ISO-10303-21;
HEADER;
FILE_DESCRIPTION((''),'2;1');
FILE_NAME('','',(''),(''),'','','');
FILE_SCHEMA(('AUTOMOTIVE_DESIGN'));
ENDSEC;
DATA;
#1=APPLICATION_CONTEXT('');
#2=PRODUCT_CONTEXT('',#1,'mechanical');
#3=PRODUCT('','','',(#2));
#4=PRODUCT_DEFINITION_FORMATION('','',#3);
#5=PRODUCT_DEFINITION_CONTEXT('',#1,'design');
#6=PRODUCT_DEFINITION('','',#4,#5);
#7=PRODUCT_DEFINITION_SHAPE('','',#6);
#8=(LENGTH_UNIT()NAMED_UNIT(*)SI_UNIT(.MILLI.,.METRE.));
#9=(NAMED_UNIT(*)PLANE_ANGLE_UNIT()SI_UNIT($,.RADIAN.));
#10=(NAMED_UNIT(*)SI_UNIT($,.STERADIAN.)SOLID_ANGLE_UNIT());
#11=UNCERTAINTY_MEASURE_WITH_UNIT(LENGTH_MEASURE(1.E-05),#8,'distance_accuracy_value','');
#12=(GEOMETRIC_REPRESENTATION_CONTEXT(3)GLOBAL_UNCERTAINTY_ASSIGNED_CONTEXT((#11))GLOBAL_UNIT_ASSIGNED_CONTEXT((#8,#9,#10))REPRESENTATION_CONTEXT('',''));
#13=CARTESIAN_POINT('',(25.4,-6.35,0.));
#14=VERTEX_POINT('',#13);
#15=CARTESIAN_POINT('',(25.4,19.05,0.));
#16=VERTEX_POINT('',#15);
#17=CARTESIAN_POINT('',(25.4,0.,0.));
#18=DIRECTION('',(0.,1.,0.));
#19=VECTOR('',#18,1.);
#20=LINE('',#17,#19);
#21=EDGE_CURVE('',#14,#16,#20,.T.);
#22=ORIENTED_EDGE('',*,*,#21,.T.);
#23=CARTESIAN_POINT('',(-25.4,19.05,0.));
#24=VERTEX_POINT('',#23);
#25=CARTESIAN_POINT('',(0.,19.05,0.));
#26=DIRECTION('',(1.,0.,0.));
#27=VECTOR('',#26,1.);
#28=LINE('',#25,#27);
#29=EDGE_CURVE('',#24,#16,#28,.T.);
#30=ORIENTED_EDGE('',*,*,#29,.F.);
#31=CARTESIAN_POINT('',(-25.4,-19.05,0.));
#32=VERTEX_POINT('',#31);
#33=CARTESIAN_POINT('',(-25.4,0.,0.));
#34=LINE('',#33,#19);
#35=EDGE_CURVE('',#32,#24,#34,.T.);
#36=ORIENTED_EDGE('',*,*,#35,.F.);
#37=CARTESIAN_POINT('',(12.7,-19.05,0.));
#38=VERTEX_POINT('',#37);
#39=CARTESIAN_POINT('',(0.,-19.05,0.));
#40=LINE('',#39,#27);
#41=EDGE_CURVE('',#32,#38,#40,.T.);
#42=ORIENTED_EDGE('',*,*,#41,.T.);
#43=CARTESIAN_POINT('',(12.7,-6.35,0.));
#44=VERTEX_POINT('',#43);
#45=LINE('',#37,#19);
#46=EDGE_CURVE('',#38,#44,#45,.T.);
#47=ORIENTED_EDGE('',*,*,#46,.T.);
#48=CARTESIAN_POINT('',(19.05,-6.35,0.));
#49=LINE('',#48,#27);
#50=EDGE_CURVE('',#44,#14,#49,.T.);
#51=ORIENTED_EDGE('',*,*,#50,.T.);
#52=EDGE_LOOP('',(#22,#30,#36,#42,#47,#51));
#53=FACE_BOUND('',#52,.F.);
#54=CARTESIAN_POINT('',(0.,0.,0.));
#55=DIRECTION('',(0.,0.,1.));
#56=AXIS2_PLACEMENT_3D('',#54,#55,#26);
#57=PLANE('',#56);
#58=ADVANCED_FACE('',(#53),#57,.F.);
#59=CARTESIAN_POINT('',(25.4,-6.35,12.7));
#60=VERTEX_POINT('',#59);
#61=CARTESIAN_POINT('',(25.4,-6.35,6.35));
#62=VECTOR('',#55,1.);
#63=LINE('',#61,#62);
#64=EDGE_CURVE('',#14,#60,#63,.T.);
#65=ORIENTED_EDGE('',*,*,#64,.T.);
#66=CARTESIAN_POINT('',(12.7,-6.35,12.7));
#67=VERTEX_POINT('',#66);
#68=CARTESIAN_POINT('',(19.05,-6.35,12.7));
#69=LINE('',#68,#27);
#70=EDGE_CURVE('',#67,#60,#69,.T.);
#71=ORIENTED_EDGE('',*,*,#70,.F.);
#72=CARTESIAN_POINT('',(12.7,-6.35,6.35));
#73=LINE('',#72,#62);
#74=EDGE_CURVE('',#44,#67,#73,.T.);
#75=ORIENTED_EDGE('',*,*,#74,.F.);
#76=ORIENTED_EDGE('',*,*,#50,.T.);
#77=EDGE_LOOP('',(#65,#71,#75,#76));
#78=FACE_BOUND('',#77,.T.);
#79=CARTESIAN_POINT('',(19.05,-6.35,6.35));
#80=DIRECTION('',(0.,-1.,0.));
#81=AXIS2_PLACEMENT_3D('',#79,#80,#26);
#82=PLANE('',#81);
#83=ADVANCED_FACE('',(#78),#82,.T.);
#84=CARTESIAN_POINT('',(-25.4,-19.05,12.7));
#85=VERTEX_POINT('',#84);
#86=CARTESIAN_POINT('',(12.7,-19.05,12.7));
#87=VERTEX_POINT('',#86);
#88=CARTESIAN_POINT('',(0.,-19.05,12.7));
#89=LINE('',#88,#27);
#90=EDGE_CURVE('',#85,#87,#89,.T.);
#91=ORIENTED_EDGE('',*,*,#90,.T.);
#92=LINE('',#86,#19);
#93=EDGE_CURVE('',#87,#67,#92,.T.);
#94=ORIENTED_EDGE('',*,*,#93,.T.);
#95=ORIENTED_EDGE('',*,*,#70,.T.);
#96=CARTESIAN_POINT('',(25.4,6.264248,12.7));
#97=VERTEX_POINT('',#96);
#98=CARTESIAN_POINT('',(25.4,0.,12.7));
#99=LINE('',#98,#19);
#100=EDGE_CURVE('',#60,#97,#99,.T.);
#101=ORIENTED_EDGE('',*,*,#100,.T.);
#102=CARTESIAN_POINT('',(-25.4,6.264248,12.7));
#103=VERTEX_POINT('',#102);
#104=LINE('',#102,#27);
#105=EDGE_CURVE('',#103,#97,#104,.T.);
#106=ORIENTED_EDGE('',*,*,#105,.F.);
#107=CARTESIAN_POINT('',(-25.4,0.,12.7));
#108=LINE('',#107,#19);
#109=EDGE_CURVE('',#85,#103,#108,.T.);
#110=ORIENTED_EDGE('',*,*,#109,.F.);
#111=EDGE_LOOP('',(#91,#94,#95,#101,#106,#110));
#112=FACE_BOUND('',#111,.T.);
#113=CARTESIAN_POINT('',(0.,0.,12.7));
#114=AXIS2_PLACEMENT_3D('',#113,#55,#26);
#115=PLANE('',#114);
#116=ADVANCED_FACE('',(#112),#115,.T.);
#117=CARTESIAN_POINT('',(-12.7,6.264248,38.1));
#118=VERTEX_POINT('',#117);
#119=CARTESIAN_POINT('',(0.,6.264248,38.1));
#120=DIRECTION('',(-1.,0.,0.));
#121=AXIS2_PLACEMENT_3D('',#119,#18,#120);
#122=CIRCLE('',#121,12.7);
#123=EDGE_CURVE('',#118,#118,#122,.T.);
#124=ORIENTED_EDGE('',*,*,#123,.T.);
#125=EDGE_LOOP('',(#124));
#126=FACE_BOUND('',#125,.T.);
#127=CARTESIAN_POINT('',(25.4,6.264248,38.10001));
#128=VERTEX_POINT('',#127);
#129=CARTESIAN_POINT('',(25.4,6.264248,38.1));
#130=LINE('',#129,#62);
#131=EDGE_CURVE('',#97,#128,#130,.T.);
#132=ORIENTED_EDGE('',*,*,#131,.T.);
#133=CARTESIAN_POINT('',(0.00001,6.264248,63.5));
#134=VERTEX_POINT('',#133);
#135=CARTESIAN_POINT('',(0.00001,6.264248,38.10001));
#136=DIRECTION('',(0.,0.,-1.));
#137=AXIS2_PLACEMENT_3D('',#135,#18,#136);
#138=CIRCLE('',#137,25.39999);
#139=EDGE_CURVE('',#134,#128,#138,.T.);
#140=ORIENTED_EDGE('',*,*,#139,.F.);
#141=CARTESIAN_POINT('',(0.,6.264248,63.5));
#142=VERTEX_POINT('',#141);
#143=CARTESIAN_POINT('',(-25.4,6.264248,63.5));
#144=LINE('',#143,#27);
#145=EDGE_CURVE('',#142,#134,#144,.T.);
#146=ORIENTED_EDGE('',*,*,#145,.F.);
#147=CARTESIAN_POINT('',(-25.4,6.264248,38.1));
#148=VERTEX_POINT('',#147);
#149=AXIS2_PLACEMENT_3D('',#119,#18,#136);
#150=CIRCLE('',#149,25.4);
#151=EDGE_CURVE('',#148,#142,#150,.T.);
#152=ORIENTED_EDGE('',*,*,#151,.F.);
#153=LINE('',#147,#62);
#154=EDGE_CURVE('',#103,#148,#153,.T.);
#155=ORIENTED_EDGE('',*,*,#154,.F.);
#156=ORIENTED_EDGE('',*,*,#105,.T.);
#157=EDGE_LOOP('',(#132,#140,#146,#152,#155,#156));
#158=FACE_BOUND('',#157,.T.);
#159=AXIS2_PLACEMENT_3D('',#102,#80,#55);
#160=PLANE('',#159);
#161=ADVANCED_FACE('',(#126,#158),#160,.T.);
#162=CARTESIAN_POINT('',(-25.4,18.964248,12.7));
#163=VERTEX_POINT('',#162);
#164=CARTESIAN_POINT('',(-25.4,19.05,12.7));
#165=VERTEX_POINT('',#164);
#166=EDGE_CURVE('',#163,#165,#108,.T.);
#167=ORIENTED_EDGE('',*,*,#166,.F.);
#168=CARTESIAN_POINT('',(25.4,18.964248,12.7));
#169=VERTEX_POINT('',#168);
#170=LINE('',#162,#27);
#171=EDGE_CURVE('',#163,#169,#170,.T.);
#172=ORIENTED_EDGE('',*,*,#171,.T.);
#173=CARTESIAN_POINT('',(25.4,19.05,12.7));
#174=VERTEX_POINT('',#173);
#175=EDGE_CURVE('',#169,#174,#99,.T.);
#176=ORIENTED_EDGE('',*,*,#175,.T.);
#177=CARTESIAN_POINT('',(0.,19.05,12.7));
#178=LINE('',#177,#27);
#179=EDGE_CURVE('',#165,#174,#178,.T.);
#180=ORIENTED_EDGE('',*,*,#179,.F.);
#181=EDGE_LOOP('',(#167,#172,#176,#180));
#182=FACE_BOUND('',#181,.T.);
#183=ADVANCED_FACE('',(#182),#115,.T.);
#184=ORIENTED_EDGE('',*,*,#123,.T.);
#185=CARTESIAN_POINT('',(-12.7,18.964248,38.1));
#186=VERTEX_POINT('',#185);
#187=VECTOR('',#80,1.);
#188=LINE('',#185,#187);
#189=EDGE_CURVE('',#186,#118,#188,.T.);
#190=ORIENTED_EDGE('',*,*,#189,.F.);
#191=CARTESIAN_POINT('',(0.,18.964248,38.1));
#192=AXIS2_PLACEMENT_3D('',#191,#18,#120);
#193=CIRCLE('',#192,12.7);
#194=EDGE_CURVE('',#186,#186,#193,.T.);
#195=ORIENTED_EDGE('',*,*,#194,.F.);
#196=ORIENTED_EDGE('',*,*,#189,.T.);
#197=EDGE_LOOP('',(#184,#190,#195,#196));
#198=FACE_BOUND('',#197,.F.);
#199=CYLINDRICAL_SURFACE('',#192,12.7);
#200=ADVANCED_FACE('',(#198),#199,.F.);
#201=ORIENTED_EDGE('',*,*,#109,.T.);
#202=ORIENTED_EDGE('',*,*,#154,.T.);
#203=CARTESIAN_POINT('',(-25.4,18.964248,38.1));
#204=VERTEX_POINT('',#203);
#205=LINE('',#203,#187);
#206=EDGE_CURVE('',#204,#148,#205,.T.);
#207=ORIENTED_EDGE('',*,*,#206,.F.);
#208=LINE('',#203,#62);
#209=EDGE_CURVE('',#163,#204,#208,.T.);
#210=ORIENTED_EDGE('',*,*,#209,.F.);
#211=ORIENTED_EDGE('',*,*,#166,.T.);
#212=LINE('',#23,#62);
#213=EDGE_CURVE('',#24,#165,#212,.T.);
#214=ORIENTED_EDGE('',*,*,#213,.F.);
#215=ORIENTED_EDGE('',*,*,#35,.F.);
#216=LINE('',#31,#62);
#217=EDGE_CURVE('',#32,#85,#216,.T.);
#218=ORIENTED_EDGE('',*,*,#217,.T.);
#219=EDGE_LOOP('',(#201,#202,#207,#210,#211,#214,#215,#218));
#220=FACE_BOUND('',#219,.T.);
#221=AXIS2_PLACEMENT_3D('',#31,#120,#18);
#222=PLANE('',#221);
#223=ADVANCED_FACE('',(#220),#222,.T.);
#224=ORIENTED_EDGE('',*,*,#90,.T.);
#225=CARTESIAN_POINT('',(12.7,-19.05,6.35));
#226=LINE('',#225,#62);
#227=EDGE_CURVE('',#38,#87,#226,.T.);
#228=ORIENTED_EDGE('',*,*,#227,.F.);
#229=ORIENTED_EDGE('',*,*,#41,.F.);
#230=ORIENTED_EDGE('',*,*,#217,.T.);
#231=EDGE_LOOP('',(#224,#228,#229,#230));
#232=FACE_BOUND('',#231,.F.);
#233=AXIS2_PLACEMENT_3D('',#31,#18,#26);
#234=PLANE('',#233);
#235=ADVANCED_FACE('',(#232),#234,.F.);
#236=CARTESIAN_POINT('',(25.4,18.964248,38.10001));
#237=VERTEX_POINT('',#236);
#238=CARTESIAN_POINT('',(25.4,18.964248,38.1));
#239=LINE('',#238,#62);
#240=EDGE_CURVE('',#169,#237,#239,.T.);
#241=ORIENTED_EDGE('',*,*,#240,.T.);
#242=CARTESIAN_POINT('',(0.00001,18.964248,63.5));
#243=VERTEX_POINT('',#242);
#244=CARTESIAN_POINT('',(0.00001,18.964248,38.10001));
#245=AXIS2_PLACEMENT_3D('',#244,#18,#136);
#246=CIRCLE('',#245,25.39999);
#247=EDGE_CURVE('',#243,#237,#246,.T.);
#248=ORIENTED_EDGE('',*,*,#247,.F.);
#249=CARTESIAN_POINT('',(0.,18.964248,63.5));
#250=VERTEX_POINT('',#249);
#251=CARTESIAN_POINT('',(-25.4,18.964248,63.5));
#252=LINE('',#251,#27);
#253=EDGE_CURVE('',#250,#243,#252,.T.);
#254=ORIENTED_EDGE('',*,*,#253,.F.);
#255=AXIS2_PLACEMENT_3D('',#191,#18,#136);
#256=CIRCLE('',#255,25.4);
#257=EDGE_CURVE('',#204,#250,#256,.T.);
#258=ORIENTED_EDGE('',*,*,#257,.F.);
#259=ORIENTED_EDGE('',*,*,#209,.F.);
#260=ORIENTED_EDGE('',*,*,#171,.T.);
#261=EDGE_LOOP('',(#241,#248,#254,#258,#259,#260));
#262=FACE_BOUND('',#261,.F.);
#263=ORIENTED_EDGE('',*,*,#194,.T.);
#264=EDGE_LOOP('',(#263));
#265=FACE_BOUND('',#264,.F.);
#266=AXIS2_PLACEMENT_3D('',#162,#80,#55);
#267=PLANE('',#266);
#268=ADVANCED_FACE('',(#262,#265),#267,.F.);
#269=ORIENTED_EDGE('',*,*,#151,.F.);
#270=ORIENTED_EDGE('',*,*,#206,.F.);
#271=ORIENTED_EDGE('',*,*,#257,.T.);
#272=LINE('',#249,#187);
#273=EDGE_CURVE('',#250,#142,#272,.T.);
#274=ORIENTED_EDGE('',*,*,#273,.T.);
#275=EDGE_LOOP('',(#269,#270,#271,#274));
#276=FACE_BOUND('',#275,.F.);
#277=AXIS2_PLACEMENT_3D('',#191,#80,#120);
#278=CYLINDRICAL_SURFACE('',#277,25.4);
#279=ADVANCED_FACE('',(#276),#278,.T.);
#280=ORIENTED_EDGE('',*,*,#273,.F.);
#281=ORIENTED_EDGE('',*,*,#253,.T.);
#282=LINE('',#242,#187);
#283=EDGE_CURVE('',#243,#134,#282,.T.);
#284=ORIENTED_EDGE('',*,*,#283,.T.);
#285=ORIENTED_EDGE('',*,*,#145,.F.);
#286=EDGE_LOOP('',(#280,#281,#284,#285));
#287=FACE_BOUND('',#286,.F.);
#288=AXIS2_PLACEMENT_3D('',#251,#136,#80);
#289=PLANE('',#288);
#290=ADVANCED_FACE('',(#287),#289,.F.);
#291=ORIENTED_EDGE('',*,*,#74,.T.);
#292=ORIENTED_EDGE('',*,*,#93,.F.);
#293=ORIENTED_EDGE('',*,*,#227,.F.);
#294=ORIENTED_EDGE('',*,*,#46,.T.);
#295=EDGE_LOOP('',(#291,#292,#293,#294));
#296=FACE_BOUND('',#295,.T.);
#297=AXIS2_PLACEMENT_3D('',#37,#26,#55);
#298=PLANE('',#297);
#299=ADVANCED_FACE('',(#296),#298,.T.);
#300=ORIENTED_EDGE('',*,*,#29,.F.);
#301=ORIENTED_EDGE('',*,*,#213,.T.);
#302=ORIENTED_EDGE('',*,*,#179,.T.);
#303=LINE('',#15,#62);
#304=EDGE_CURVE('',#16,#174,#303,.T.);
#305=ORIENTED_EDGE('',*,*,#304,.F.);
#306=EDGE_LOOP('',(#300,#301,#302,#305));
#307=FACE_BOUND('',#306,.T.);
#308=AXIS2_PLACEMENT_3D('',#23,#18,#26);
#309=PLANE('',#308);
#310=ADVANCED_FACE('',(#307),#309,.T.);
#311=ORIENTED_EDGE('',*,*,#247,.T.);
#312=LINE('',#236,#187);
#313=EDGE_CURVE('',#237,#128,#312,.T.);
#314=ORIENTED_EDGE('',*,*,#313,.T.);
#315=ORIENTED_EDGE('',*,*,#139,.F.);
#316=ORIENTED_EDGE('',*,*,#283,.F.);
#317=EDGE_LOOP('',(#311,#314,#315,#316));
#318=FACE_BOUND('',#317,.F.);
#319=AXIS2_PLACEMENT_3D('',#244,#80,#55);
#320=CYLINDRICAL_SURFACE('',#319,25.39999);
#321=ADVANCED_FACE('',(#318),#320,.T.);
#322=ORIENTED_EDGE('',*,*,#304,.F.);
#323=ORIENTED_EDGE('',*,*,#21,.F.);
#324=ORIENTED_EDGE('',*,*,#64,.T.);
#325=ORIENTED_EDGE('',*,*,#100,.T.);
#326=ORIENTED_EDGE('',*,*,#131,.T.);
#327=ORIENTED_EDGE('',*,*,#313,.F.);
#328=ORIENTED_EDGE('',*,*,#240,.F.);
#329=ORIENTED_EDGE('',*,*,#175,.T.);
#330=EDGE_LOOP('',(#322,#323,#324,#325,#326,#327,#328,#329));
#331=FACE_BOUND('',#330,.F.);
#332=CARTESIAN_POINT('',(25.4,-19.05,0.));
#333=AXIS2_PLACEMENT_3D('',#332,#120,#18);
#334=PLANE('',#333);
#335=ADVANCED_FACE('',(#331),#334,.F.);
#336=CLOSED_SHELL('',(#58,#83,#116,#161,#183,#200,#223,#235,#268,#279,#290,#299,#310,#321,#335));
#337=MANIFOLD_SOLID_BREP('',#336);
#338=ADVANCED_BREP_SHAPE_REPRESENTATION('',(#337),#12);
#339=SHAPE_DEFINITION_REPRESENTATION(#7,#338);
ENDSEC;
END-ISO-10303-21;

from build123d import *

# Parameters (mm, degrees)
F0_W     = 50.8
F0_H     = 38.1
F1_DEPTH = 12.7
F2_W     = 12.7
F2_H     = 12.7
F3_DEPTH = 12.7
F4_W     = 12.7
F4_H     = 50.8
F5_DEPTH = 50.8
F6_R     = 12.7
F7_DEPTH = 12.7
F8_R     = 25.4
F9_R     = 25.39999


# Not quite as in the source:
# - a fillet or chamfer is up to 0.001 mm smaller than in the source, because OpenCascade refuses the exact size


with BuildPart() as f1:
    # F0 (on Top) → F1 (new body)
    with BuildSketch(Plane.XY):
        Rectangle(F0_W, F0_H)
    extrude(amount=F1_DEPTH)

    # F2 (on face) → F3 (cut)
    with BuildSketch(Plane.XZ.offset(19.05)):
        with Locations((19.05, 6.35)):
            Rectangle(F2_W, F2_H)
    extrude(amount=-F3_DEPTH, mode=Mode.SUBTRACT)

    # F4 (on face) → F5 (join)
    with BuildSketch(Plane(origin=(-25.4, 0, 0), x_dir=(0, -1, 0), z_dir=(-1, 0, 0))):
        with Locations((-12.6142477781, 38.1)):
            Rectangle(F4_W, F4_H)
    extrude(amount=-F5_DEPTH)

    # F6 (on face) → F7 (cut)
    with BuildSketch(Plane(origin=(0, 18.9642477781, 0), x_dir=(-1, 0, 0), z_dir=(0, 1, 0))):
        with Locations((0, 38.1)):
            Circle(F6_R)
    extrude(amount=-F7_DEPTH, mode=Mode.SUBTRACT)

    # F8
    f8_edges = [f1.edges().sort_by_distance(p)[0] for p in [
        (-25.4, 12.614248, 63.5),
    ]]
    fillet(f8_edges, radius=F8_R)

    # F9 (radius 25.4 in the source; OpenCascade refuses exactly that, so slightly less here)
    f9_edges = [f1.edges().sort_by_distance(p)[0] for p in [
        (25.4, 12.614248, 63.5),
    ]]
    fillet(f9_edges, radius=F9_R)


solid = f1.part
